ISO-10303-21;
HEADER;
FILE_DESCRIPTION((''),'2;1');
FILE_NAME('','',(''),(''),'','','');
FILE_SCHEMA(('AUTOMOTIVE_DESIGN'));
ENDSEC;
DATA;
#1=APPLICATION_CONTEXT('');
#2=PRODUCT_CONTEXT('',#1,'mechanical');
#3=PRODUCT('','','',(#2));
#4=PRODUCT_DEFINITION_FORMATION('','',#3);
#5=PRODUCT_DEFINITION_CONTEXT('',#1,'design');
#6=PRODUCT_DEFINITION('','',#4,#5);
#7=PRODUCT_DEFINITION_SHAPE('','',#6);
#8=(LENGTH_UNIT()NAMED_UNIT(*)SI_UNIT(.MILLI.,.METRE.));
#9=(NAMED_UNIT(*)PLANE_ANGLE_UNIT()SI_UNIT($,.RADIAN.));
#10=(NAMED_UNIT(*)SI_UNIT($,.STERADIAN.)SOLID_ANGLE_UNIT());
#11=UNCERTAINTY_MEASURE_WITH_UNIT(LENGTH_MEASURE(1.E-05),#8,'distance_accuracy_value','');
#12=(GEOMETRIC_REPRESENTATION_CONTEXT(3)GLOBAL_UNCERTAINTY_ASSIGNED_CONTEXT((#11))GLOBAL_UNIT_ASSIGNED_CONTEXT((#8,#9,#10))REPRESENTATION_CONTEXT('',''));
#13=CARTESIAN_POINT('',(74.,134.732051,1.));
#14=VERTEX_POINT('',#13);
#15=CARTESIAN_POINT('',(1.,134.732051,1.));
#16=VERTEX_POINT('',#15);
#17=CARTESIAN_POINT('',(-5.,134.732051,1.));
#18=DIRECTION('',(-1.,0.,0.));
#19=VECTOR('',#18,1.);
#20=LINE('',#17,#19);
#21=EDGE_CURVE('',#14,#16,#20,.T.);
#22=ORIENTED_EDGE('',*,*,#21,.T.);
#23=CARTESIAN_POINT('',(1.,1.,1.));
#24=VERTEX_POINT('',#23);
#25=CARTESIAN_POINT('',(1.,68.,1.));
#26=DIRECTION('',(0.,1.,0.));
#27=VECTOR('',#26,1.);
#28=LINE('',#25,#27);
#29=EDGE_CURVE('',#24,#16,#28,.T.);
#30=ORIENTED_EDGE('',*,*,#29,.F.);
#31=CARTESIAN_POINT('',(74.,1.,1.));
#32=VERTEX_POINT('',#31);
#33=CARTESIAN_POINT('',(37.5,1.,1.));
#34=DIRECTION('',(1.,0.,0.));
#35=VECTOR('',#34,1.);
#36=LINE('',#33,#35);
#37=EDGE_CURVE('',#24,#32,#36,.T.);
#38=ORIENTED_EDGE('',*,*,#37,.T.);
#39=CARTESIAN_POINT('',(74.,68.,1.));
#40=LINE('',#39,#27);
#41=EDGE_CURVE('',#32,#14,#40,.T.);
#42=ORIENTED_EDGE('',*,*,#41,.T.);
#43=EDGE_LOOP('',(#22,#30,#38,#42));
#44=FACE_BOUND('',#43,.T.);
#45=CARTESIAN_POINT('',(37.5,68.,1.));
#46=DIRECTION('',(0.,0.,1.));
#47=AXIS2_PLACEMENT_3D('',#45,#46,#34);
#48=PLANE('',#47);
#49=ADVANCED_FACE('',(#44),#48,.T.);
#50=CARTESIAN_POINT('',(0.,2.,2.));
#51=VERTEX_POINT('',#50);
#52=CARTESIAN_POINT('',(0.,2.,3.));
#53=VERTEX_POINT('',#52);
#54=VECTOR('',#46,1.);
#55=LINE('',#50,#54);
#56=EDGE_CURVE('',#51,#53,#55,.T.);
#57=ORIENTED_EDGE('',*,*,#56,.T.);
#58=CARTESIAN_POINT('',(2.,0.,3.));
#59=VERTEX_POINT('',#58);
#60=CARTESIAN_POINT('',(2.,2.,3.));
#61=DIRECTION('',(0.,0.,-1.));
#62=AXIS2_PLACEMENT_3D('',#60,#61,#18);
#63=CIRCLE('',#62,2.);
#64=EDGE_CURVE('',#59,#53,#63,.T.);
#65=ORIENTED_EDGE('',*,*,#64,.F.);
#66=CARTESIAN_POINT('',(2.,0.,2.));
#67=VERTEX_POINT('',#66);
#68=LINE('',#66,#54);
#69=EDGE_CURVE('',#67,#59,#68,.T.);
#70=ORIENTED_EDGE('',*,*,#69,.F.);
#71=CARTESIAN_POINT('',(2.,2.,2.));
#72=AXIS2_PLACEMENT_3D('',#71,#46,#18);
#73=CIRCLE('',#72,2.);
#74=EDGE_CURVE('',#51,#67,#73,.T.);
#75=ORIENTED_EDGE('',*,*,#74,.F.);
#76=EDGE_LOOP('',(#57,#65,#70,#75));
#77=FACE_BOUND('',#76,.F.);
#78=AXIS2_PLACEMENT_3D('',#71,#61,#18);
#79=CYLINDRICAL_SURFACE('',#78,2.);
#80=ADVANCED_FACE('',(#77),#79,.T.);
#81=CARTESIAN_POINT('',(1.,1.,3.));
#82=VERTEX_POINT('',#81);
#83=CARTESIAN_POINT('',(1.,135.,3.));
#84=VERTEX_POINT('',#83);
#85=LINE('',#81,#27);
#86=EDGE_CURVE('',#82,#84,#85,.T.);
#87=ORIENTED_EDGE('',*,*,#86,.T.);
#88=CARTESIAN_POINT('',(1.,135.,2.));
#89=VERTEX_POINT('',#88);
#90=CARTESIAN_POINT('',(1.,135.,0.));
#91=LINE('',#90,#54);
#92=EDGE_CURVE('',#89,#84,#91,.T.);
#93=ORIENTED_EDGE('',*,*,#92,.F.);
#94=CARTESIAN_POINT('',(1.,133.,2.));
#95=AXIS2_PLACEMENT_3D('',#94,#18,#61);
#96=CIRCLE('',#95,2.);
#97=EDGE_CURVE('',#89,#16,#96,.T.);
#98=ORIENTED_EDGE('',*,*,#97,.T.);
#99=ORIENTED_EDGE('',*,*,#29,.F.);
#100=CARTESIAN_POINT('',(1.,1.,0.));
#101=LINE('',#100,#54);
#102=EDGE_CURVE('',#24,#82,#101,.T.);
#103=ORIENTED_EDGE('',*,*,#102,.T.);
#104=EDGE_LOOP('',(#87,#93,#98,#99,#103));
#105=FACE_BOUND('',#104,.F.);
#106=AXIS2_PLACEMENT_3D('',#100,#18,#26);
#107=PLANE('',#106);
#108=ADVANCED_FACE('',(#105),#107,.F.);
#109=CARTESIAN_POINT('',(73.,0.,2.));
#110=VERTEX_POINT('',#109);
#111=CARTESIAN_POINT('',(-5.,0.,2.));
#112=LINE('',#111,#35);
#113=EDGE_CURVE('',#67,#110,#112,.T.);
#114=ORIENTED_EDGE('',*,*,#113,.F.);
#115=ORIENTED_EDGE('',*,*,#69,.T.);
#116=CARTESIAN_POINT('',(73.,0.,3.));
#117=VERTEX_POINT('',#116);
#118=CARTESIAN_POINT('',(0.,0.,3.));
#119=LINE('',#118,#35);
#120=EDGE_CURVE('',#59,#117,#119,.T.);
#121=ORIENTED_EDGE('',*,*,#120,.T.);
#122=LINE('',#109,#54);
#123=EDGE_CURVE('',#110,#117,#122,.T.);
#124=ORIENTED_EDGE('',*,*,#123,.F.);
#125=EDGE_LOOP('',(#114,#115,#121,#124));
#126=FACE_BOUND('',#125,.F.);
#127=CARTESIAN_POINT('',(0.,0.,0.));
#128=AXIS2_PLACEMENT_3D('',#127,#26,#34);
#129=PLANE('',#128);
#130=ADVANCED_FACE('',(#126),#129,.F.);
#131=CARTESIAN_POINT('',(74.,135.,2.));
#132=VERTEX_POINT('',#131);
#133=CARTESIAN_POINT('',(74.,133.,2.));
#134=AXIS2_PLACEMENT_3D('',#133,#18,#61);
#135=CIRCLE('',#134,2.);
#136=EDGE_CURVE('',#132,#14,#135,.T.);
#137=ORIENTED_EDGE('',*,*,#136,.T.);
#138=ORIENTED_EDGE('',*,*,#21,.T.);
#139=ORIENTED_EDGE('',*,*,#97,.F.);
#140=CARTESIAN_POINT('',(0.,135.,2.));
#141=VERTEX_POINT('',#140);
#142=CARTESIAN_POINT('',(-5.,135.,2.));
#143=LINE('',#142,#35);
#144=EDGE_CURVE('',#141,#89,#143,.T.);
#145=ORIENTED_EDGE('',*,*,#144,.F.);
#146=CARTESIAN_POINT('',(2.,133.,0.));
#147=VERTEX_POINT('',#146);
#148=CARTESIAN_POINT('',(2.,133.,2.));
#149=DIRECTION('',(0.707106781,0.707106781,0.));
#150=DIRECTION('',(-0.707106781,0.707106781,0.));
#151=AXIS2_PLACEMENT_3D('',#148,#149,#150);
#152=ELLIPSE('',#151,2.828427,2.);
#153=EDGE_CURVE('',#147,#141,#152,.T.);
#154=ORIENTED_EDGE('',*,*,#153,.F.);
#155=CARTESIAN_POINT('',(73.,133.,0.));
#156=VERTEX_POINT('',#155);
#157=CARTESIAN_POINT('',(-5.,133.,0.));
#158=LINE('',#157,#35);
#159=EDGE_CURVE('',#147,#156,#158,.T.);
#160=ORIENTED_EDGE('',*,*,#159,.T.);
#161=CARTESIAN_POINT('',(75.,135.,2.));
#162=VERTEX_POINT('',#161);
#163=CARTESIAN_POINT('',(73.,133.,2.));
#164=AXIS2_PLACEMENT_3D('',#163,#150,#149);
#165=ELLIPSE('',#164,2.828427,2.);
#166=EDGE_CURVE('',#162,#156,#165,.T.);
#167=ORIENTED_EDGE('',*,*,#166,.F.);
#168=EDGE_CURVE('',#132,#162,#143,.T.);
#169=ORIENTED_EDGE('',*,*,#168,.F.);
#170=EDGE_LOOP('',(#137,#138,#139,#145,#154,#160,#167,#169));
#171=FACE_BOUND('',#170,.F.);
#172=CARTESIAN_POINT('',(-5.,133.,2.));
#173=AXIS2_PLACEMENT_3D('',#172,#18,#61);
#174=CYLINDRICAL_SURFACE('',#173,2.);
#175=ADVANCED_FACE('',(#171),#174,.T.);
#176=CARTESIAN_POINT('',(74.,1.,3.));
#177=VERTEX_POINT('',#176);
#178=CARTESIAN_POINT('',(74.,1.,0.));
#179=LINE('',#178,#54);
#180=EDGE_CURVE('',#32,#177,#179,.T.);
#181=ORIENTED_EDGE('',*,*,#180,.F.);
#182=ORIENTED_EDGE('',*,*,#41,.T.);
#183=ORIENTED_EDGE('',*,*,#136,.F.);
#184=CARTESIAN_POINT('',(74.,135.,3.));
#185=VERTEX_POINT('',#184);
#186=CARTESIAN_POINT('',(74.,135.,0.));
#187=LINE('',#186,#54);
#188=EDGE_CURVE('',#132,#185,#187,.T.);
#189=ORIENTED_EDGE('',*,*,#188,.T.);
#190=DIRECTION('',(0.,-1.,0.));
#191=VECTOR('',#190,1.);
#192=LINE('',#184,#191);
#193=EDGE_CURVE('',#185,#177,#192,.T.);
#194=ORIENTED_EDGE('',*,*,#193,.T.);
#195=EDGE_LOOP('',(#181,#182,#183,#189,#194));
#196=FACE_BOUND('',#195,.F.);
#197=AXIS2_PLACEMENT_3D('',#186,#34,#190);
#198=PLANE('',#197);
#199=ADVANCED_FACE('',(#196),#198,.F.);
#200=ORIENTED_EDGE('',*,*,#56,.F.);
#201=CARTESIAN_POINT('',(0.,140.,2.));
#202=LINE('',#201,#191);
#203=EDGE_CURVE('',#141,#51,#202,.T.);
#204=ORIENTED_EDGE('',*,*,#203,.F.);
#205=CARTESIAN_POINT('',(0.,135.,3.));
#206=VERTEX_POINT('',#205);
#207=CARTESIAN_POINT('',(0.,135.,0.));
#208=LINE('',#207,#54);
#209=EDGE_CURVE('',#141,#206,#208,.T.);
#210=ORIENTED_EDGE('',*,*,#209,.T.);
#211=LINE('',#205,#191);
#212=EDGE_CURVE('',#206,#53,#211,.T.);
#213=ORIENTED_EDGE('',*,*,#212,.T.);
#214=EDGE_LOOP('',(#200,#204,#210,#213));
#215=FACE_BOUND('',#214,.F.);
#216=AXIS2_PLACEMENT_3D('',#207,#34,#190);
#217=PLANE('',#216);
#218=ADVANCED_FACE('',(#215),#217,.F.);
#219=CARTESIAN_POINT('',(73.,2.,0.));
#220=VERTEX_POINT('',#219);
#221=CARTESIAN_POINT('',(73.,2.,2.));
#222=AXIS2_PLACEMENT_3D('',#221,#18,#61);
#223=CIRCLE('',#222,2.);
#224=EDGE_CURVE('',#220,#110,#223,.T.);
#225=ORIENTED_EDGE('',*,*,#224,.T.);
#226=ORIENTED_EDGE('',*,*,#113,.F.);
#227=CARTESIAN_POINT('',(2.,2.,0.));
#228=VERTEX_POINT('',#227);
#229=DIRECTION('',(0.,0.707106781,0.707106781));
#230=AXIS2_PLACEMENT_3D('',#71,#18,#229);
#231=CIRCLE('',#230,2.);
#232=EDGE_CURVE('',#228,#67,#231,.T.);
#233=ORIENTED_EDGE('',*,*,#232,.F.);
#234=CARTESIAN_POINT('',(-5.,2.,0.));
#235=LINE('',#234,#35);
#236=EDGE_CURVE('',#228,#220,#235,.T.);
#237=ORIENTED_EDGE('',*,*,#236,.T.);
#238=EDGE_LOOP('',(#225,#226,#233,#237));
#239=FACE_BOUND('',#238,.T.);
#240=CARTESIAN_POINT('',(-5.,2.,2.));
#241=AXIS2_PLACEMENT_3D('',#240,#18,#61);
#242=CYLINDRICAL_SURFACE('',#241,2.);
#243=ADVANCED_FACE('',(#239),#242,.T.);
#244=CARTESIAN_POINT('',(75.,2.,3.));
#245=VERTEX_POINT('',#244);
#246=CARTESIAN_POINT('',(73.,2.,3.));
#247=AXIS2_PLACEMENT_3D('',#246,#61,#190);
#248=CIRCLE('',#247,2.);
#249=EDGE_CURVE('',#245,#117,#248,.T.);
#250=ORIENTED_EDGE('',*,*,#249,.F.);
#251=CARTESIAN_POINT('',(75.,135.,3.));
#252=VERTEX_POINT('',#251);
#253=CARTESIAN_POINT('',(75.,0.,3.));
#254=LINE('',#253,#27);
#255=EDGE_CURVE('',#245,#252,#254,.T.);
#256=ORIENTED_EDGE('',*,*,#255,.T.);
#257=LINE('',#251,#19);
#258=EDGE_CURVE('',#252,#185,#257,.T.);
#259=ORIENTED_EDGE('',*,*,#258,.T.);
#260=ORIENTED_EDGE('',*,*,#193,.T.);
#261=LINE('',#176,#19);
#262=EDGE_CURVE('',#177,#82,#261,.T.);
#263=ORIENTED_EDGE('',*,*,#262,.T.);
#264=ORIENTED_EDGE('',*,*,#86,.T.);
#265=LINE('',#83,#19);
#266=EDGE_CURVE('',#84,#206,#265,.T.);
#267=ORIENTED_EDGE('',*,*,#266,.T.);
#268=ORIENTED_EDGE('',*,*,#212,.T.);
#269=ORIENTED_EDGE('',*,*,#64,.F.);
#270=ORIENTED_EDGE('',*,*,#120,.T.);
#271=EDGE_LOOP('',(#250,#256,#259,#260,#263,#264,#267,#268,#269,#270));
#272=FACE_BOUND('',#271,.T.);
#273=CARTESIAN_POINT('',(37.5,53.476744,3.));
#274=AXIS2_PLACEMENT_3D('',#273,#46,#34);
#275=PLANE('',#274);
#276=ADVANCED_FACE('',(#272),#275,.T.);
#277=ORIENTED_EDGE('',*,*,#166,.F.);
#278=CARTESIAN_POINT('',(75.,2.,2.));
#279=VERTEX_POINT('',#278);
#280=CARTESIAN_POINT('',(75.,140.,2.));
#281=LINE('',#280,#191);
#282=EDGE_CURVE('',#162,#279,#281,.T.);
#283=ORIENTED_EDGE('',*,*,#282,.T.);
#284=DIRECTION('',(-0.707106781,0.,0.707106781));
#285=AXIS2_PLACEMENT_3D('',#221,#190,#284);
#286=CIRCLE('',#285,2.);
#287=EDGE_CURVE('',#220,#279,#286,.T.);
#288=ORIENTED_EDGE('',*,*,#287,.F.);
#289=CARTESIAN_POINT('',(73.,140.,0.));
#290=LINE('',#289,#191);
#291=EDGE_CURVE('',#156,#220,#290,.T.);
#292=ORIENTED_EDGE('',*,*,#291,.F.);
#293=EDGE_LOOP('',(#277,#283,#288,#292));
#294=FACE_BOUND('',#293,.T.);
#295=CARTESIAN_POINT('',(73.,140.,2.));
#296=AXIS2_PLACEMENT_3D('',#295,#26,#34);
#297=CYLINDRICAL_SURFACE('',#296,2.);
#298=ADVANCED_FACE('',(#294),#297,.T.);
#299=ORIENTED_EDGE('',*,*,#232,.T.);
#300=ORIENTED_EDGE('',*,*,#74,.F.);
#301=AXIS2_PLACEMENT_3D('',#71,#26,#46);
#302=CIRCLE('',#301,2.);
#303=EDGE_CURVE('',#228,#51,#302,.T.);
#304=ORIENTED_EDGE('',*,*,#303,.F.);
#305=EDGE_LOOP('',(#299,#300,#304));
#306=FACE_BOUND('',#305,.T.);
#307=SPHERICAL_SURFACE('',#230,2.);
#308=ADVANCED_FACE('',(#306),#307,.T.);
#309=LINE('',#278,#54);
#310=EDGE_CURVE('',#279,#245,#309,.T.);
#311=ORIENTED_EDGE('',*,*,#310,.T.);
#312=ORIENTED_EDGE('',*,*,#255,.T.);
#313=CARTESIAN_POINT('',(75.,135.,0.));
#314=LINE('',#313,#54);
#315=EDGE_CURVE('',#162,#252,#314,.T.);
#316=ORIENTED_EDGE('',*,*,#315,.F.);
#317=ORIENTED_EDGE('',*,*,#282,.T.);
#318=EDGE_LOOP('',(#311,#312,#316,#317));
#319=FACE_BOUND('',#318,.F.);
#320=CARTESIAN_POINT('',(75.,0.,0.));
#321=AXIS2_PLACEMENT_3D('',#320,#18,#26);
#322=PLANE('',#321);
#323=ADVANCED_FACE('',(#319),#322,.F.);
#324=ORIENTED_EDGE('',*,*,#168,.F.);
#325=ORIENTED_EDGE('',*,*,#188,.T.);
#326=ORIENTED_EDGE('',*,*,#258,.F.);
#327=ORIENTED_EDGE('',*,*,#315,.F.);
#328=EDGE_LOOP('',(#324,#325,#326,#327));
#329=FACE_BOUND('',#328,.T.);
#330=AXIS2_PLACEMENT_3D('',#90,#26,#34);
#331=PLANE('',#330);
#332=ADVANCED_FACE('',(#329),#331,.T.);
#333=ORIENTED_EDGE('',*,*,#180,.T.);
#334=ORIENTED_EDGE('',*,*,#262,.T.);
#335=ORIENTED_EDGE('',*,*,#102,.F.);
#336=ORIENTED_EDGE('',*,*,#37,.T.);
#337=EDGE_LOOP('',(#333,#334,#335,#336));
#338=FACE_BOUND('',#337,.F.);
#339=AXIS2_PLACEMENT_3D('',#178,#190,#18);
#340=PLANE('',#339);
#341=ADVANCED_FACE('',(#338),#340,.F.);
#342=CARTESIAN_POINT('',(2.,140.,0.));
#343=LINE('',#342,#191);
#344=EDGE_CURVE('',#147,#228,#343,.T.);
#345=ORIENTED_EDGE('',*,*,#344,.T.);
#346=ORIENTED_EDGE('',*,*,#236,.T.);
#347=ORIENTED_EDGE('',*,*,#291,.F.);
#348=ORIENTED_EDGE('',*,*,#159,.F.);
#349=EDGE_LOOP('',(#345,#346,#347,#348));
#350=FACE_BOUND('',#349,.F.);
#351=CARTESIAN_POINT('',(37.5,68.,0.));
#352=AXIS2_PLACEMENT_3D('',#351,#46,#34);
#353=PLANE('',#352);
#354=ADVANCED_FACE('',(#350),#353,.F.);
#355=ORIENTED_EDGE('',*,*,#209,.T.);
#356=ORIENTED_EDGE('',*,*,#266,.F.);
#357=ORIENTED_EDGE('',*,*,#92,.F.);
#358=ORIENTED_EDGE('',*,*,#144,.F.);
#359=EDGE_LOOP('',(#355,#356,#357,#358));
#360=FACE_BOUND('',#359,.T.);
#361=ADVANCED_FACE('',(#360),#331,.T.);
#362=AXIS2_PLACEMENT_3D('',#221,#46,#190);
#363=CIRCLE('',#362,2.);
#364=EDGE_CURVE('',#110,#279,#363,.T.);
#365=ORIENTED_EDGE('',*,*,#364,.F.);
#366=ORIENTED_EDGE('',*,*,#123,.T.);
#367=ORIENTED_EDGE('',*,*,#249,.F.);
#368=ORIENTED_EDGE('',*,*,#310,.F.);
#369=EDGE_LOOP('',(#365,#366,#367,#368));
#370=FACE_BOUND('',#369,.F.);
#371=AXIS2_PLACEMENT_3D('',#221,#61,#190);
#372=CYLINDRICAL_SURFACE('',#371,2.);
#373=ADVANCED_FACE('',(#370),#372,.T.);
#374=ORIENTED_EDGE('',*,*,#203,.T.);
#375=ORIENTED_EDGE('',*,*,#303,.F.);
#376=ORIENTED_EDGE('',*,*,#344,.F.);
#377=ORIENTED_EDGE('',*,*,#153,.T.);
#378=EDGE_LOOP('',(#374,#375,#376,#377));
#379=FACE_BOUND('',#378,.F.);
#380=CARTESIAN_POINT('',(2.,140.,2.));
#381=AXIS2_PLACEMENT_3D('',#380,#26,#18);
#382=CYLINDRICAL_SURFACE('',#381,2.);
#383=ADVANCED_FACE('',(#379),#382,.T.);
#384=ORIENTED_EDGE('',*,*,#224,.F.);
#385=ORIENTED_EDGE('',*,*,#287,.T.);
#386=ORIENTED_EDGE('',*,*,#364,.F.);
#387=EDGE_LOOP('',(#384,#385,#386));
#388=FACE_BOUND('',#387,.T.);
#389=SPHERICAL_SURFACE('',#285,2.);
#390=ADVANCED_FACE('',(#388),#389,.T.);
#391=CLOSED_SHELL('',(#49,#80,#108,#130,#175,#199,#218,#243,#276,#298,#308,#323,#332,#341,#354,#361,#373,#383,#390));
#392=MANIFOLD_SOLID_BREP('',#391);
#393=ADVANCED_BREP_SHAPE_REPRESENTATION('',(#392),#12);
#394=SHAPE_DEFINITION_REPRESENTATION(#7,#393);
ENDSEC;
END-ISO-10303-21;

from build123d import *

# Parameters (mm, degrees)
F1_DEPTH     = 3
F0_W         = 73
F0_H         = 134
F2_DEPTH     = 1
F3_T1_DEPTH  = 145
F3_T3_DEPTH  = 85
F4_T1_DEPTH  = 6
F4_S5_W      = 2
F4_S5_H      = 2
F4_T6_DEPTH  = 2
F4_S11_W     = 2
F4_S11_H     = 2
F4_T12_DEPTH = 2


# Not quite as in the source:
# - a fillet or chamfer that OpenCascade refuses, or shapes differently, is made with other operations: its cross-section is extruded or revolved along the edge and cut away or added


with BuildPart() as f1:
    # F0 (on Top) → F1 (new body)
    with BuildSketch(Plane.XY):
        Polygon((0, 135), (0, 0), (75, 0), (75, 135), (74, 135), (74, 1), (1, 1), (1, 135), align=None)
    extrude(amount=F1_DEPTH)

    # F0 (on Top) → F2 (join)
    with BuildSketch(Plane.XY):
        with Locations((37.5, 68)):
            Rectangle(F0_W, F0_H)
    extrude(amount=F2_DEPTH)

    # F3: fillet of radius 2 on 4 edges, made by hand

    # F3_s2 → F3_t1 (cut)
    with BuildSketch(Plane.XZ.offset(-140)):
        with BuildLine():
            ThreePointArc((0, 2), (0.5857864376, 0.5857864376), (2, 0))
            Line((2, 0), (0, 0))
            Line((0, 0), (0, 2))
        make_face()
        with BuildLine():
            ThreePointArc((75, 2), (74.4142135624, 0.5857864376), (73, 0))
            Line((73, 0), (75, 0))
            Line((75, 0), (75, 2))
        make_face()
    extrude(amount=F3_T1_DEPTH, mode=Mode.SUBTRACT)

    # F3_s4 → F3_t3 (cut)
    with BuildSketch(Plane.YZ.offset(-5)):
        with BuildLine():
            ThreePointArc((2, 0), (0.5857864376, 0.5857864376), (0, 2))
            Line((0, 2), (0, 0))
            Line((0, 0), (2, 0))
        make_face()
        with BuildLine():
            ThreePointArc((133, 0), (134.4142135624, 0.5857864376), (135, 2))
            Line((135, 2), (135, 0))
            Line((135, 0), (133, 0))
        make_face()
    extrude(amount=F3_T3_DEPTH, mode=Mode.SUBTRACT)

    # F4: fillet of radius 2 on 2 edges, made by hand

    # F4_s2 → F4_t1 (cut)
    with BuildSketch(Plane.XY.offset(2)):
        with BuildLine():
            ThreePointArc((73, 0), (74.4142135624, 0.5857864376), (75, 2))
            Line((75, 2), (75, 0))
            Line((75, 0), (73, 0))
        make_face()
        with BuildLine():
            ThreePointArc((0, 2), (0.5857864376, 0.5857864376), (2, 0))
            Line((2, 0), (0, 0))
            Line((0, 0), (0, 2))
        make_face()
    extrude(amount=F4_T1_DEPTH, mode=Mode.SUBTRACT)


with BuildPart() as f4_tool4:
    # F4_s5 → F4_t6 (new body)
    with BuildSketch(Plane.YZ.offset(2)):
        with Locations((1, 1)):
            Rectangle(F4_S5_W, F4_S5_H)
    extrude(amount=-F4_T6_DEPTH)

    # F4_s7 → F4_t8 (revolve, cut)
    with BuildSketch(Plane(origin=(2, 2, 2), x_dir=(0, 0.7071067812, 0.7071067812), z_dir=(0, -0.7071067812, 0.7071067812))):
        with BuildLine():
            ThreePointArc((0, -2), (2, 0), (0, 2))
            Line((0, 2), (0, -2))
        make_face()
    revolve(axis=Axis((2, 2, 2), (-1, 0, 0)), mode=Mode.SUBTRACT)


with BuildPart() as f1_1:
    add(f1.part)

    # F4_t3: cut F4_tool4
    add(f4_tool4.part, mode=Mode.SUBTRACT)


with BuildPart() as f4_tool10:
    # F4_s11 → F4_t12 (new body)
    with BuildSketch(Plane.XZ.offset(-2)):
        with Locations((74, 1)):
            Rectangle(F4_S11_W, F4_S11_H)
    extrude(amount=F4_T12_DEPTH)

    # F4_s13 → F4_t14 (revolve, cut)
    with BuildSketch(Plane(origin=(73, 2, 2), x_dir=(-0.7071067812, 0, 0.7071067812), z_dir=(0.7071067812, 0, 0.7071067812))):
        with BuildLine():
            ThreePointArc((0, -2), (2, 0), (0, 2))
            Line((0, 2), (0, -2))
        make_face()
    revolve(axis=Axis((73, 2, 2), (0, -1, 0)), mode=Mode.SUBTRACT)


with BuildPart() as f1_2:
    add(f1_1.part)

    # F4_t9: cut F4_tool10
    add(f4_tool10.part, mode=Mode.SUBTRACT)


solid = f1_2.part
